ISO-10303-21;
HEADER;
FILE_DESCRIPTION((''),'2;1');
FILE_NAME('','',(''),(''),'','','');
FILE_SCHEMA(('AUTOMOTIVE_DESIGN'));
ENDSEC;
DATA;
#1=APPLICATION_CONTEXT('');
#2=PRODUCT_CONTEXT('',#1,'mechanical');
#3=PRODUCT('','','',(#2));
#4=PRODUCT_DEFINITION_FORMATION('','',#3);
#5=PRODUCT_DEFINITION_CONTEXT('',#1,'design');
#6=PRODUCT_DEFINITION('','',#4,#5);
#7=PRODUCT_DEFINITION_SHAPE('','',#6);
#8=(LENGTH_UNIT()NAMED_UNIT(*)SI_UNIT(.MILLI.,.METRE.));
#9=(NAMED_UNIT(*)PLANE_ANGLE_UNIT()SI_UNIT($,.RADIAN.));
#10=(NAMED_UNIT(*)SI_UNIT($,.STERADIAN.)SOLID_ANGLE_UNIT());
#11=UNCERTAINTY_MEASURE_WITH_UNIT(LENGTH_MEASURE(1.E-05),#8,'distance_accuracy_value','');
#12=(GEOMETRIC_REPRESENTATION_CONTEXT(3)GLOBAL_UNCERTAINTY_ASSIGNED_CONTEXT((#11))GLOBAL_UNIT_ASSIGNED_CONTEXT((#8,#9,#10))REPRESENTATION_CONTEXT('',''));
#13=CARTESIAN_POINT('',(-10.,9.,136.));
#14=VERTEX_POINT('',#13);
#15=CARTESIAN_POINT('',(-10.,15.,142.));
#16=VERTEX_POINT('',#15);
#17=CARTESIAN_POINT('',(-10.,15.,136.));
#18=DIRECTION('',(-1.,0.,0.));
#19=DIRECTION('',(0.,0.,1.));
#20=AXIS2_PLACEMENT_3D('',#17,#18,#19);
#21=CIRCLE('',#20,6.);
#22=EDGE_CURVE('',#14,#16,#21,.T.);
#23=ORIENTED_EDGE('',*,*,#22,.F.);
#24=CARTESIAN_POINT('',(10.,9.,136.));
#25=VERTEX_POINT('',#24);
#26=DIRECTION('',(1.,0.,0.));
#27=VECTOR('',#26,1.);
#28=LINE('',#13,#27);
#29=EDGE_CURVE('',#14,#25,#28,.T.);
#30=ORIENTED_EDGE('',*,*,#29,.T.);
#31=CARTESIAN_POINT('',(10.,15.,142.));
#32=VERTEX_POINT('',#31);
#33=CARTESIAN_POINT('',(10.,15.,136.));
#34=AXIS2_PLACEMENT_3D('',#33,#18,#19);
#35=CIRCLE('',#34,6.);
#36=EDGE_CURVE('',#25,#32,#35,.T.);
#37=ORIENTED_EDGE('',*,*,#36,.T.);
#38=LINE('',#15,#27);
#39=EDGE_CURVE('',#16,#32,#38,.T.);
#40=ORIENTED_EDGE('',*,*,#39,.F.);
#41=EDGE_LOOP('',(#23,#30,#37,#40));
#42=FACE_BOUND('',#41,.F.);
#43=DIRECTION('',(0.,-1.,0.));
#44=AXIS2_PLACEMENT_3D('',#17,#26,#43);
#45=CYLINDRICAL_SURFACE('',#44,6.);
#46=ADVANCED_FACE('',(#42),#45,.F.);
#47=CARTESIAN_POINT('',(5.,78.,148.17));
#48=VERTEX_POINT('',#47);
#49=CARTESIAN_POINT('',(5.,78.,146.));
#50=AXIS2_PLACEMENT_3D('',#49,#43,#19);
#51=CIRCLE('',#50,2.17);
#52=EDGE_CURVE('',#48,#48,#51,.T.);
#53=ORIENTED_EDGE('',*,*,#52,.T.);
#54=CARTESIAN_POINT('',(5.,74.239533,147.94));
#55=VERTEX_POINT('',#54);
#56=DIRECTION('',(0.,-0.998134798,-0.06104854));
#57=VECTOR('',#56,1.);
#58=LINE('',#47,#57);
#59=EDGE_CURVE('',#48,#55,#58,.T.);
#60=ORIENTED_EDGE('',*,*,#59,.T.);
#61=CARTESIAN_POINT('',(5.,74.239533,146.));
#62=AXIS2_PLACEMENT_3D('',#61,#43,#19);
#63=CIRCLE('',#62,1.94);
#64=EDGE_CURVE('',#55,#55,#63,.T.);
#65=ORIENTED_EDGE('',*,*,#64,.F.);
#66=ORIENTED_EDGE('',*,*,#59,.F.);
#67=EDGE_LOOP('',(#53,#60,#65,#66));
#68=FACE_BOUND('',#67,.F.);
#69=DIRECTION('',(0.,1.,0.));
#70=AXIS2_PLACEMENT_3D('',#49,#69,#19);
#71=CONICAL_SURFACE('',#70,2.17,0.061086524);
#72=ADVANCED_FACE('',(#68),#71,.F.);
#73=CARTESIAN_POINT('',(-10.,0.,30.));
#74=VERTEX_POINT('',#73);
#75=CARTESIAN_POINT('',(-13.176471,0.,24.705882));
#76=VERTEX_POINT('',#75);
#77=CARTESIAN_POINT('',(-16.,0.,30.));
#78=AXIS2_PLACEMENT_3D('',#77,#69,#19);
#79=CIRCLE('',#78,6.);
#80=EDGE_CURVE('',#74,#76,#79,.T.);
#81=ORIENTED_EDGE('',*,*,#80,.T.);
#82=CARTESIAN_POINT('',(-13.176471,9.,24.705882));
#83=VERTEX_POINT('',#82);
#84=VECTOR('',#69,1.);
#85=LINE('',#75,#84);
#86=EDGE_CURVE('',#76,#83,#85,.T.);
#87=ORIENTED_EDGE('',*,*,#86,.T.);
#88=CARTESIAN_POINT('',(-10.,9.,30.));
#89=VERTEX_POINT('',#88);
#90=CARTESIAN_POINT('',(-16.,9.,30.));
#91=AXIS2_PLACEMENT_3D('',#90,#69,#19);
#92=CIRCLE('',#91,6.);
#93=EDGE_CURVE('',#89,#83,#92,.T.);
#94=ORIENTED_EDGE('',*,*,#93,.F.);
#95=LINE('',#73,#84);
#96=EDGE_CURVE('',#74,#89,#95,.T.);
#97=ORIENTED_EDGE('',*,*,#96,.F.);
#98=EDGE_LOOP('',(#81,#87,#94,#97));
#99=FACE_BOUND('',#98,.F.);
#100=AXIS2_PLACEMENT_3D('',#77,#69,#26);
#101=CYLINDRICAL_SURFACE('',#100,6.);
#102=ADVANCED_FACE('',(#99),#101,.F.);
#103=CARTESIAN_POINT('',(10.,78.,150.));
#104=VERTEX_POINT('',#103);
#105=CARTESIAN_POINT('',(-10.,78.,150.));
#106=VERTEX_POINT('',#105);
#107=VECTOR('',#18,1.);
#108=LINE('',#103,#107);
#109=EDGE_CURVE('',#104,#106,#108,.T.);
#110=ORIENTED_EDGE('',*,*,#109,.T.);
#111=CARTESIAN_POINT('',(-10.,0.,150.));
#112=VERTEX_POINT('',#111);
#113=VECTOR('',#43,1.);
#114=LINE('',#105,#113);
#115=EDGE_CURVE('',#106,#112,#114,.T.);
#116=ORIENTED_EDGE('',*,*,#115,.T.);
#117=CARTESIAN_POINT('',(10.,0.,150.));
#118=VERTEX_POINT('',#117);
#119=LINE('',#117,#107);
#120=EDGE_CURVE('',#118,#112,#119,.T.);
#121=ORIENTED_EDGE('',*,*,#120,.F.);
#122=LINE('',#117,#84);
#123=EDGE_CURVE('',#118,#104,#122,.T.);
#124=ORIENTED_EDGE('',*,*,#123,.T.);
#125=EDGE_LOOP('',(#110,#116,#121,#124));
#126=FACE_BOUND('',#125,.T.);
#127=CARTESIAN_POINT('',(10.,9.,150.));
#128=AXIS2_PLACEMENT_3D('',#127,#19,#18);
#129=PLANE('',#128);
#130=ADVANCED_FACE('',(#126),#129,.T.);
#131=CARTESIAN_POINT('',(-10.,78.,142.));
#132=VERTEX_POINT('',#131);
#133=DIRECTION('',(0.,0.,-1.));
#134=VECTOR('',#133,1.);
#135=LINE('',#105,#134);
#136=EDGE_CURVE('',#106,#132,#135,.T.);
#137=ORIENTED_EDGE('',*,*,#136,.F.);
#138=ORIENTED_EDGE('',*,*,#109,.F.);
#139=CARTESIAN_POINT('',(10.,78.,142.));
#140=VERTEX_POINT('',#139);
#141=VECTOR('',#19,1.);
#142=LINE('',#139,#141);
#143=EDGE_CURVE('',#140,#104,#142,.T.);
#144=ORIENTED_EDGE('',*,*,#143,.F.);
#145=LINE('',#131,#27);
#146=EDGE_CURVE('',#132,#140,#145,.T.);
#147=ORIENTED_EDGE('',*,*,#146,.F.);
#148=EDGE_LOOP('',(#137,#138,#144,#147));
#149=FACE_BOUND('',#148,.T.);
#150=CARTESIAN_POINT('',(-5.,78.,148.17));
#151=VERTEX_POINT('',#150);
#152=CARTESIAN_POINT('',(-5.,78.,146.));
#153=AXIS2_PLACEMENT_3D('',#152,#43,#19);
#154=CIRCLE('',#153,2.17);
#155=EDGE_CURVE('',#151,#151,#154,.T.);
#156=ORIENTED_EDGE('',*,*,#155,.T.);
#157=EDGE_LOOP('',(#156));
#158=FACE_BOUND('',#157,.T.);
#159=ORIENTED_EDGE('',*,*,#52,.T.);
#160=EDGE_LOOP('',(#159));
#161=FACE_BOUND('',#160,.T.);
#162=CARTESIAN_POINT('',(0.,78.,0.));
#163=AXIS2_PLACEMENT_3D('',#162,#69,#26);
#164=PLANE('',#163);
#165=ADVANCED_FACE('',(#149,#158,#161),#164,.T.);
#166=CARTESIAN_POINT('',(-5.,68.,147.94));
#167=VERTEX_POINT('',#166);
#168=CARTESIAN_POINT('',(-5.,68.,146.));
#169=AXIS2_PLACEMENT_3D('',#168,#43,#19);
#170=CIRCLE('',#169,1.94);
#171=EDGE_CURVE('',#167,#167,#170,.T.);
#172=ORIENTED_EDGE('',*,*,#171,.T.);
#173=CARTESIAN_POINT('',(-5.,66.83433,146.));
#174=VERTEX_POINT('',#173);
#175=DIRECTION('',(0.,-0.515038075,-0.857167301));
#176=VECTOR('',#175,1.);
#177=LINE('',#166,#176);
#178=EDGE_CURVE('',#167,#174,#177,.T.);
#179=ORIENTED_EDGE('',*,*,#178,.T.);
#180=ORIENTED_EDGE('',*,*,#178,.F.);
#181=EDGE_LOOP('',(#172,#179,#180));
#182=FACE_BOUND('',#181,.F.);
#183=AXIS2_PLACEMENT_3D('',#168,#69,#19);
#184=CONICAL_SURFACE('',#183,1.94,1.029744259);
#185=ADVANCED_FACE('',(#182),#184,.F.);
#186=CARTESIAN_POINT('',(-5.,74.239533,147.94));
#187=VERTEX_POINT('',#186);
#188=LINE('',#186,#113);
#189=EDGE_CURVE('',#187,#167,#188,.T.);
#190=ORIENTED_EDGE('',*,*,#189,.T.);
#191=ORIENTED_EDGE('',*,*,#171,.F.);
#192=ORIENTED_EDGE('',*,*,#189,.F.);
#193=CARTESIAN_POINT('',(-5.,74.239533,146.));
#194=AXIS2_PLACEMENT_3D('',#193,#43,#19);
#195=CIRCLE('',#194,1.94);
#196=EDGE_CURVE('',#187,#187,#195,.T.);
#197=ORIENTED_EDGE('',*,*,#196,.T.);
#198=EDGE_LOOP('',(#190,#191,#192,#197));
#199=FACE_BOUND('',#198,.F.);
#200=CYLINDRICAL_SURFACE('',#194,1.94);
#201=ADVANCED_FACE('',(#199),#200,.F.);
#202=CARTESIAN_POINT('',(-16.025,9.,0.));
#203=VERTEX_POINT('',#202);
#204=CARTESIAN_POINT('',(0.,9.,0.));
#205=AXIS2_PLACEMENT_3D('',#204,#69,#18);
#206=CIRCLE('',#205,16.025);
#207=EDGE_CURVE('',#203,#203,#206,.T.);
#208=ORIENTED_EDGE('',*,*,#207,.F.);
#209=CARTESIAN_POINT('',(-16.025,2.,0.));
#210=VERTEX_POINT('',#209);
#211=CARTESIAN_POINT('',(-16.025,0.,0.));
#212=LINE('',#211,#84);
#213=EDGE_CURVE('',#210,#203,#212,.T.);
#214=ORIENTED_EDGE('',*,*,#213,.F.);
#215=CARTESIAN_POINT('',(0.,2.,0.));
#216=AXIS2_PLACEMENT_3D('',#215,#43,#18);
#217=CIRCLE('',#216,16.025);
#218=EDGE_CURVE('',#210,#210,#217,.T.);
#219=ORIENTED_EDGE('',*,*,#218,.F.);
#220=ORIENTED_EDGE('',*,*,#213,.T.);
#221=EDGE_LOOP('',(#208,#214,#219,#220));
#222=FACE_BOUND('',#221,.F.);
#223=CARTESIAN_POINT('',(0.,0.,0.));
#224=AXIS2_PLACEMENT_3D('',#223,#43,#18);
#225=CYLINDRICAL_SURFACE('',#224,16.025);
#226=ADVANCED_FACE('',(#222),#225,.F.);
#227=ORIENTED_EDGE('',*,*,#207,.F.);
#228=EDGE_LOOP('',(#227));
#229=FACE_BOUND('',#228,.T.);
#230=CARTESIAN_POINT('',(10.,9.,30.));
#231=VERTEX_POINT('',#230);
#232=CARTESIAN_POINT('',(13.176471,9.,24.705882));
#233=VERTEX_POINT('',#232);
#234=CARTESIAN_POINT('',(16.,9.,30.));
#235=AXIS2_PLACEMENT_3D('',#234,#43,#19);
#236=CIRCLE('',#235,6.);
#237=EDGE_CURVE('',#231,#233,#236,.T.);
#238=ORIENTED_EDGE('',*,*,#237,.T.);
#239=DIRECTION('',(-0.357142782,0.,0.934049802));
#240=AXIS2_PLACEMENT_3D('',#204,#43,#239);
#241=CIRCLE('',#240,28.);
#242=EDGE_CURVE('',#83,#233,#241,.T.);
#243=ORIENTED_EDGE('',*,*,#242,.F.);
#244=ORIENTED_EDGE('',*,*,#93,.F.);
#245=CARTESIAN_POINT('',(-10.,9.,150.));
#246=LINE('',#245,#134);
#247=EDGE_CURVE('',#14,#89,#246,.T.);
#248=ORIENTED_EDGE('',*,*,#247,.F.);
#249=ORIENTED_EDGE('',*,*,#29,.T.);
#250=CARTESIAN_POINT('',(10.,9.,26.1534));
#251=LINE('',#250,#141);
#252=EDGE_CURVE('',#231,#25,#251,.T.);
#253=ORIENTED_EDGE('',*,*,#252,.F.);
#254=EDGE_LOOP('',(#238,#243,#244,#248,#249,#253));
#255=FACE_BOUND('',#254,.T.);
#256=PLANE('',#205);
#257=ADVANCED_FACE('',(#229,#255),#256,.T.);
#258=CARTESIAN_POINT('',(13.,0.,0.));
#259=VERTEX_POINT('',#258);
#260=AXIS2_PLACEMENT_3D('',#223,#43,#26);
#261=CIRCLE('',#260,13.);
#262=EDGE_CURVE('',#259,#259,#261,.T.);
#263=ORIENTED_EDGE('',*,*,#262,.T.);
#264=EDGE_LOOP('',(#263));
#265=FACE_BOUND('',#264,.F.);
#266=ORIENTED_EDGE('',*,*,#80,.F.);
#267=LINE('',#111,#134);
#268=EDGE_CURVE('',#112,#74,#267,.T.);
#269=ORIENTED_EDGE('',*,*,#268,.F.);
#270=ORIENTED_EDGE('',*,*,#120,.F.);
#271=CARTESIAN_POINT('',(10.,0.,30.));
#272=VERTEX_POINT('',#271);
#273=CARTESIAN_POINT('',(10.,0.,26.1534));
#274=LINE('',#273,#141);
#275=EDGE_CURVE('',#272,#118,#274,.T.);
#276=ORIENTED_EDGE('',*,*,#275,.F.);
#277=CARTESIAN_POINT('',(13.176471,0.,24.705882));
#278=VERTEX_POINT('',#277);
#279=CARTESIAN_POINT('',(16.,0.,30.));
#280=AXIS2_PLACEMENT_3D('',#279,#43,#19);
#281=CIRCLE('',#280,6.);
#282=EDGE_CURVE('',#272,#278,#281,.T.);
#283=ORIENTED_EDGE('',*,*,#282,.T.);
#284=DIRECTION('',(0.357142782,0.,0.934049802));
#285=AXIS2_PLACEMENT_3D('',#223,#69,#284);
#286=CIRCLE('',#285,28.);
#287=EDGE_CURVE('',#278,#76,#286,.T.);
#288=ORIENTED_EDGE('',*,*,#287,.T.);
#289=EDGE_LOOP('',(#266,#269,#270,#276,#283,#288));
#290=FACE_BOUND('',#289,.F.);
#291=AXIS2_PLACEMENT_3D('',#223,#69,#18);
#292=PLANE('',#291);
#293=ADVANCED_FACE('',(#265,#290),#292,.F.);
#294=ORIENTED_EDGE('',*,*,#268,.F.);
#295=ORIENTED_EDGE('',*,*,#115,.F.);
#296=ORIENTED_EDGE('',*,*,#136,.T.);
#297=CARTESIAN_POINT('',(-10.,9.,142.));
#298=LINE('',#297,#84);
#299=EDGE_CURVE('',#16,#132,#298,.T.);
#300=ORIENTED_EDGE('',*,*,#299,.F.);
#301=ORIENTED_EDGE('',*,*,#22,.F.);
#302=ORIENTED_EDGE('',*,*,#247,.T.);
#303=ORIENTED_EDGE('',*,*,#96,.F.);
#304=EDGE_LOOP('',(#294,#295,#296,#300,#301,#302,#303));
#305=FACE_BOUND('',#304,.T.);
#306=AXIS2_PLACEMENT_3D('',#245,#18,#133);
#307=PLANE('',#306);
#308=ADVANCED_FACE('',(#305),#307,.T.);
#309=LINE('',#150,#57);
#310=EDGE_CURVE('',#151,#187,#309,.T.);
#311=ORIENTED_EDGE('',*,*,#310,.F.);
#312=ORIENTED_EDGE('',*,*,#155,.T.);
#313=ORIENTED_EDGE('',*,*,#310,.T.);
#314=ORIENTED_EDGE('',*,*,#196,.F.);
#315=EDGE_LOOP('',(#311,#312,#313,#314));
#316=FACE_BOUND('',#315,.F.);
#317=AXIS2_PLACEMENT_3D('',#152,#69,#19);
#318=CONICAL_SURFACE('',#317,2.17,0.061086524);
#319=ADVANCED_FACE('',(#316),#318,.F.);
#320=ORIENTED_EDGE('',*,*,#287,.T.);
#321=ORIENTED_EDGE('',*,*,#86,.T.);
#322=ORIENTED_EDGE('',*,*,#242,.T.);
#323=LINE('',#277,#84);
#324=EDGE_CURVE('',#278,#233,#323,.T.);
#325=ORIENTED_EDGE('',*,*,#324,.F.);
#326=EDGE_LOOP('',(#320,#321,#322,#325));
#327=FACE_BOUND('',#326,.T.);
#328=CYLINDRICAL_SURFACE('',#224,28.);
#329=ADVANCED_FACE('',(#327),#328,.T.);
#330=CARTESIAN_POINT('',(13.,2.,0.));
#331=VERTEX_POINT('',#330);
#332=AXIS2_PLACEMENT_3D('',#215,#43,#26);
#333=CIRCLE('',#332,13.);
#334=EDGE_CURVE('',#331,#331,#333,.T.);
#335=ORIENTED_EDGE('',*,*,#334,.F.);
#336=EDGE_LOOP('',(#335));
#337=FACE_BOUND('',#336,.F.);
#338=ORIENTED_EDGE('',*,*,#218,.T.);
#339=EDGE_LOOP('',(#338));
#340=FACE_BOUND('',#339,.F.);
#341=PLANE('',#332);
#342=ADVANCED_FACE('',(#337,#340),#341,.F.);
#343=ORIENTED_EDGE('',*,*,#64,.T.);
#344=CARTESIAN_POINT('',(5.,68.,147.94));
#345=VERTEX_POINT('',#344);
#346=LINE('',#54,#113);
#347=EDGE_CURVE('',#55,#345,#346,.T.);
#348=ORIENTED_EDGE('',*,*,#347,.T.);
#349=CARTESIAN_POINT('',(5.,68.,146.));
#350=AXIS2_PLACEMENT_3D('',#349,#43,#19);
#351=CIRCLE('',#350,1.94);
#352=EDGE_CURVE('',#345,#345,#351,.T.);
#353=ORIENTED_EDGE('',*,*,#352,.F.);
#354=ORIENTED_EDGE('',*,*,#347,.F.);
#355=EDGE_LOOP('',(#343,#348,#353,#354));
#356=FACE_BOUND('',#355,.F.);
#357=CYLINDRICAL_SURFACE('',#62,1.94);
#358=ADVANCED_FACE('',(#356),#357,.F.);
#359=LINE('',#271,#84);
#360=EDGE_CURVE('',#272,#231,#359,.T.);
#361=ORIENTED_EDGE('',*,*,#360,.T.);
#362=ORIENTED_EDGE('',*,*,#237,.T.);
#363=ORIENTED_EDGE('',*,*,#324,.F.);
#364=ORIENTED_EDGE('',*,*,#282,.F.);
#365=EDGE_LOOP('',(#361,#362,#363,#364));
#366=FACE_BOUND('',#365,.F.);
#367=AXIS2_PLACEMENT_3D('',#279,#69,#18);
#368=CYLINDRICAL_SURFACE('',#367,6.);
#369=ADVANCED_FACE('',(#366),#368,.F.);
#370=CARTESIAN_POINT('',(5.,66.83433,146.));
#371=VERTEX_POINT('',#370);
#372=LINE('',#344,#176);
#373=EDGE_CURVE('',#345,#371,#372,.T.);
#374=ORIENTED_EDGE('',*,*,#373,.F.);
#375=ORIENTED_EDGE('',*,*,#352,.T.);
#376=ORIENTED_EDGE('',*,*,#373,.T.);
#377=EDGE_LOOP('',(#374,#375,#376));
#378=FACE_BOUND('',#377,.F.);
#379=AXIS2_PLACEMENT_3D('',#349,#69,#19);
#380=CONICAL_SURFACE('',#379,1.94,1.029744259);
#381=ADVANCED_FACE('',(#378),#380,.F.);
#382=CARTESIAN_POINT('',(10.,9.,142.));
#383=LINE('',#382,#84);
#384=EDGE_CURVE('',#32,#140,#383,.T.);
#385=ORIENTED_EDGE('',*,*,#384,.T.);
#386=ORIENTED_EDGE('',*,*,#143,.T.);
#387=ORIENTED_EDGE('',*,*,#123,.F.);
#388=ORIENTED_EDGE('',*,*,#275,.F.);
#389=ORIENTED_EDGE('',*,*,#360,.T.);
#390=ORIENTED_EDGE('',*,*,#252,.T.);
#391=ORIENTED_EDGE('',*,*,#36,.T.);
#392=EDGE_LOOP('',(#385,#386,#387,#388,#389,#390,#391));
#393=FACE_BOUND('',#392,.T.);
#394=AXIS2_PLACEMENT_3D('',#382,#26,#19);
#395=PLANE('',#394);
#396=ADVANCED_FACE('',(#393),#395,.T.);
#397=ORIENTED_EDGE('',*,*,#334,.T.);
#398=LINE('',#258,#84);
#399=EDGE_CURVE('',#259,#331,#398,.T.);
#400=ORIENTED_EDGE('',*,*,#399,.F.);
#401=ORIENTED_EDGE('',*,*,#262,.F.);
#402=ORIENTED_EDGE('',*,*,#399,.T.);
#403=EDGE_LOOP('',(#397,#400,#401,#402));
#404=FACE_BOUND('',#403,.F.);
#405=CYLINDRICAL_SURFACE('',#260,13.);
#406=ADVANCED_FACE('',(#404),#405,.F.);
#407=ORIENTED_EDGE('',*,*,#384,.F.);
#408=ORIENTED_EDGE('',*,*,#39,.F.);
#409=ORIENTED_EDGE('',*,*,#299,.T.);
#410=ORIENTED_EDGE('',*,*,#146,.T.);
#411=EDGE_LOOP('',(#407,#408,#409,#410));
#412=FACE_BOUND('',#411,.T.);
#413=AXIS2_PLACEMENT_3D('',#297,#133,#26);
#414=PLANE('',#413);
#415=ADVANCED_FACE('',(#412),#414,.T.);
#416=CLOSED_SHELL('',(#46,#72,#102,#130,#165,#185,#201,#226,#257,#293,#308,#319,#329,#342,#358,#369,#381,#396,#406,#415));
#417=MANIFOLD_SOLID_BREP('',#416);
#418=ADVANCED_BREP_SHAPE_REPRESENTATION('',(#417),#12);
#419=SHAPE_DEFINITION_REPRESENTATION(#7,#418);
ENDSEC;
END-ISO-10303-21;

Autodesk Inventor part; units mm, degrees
ref_plane "YZ Plane" through (0, 0, 0) normal (1, 0, 0) x (0, 1, 0)
ref_plane "XZ Plane" through (0, 0, 0) normal (0, 1, 0) x (-1, 0, 0)
ref_plane "XY Plane" through (0, 0, 0) normal (0, 0, 1) x (1, 0, 0)
sketch "스케치1" plane through (0, 0, 0) normal (0, 1, 0) x (-1, 0, 0)
  circle A0 centre (0, 0) radius 16.025
  circle A1 centre (0, 0) radius 28
  dimension "d0" = 32.05
  dimension "d1" = 56
extrude "돌출1" add sketch "스케치1" along normal blind 9
sketch "스케치2" plane through (0, 0, 0) normal (0, -1, 0) x (1, 0, 0)
  circle A0 centre (0, 0) radius 13
  circle A1 centre (0, 0) radius 16.025 projected
  dimension "d4" = 26
extrude "돌출2" add sketch "스케치2" against normal blind 2
sketch "스케치3" plane through (0, 0, 0) normal (0, -1, 0) x (1, 0, 0)
  circle A0 centre (0, 0) radius 28 projected
  line L0 (-10, 26.1534) -> (10, 26.1534)
  line L1 (10, 26.1534) -> (10, 150)
  line L2 (10, 150) -> (-10, 150)
  line L3 (-10, 150) -> (-10, 26.1534)
  dimension "d7" = 20
  dimension "d8" = 10
  dimension "d15" = 150
extrude "돌출3" add sketch "스케치3" against normal up to surface (9 mm away) contours A0 L3 L2 L1
sketch "스케치4" plane through (0, 9, 0) normal (0, 1, 0) x (1, 0, 0)
  line L0 (10, -150) -> (-10, -150) projected
  line L1 (10, -150) -> (-10, -150)
  line L2 (-10, -150) -> (-10, -142)
  line L3 (-10, -142) -> (10, -142)
  line L4 (10, -142) -> (10, -150)
  point P0 (0, 0)
  dimension "d12" = 8
extrude "돌출4" add sketch "스케치4" along normal blind 69
fillet "모깎기1" radius 6 2 edges at (10, 4.5, 26.1534) (-10, 4.5, 26.1534)
sketch "스케치5" plane through (0, 78, 0) normal (0, 1, 0) x (1, 0, 0)
  circle A0 centre (-5, -146) radius 1.55 projected
  circle A1 centre (5, -146) radius 1.55 projected
  point P0 (0, 0)
hole "구멍1" at (-5, 78, 146) at (5, 78, 146) direction (0, -1, 0) diameter 3.88 depth 10 tip angle 118 countersink diameter 4.34 countersink angle 7
fillet "모깎기2" radius 6 1 edges at (0, 9, 142)
properties part number "test_arm"
